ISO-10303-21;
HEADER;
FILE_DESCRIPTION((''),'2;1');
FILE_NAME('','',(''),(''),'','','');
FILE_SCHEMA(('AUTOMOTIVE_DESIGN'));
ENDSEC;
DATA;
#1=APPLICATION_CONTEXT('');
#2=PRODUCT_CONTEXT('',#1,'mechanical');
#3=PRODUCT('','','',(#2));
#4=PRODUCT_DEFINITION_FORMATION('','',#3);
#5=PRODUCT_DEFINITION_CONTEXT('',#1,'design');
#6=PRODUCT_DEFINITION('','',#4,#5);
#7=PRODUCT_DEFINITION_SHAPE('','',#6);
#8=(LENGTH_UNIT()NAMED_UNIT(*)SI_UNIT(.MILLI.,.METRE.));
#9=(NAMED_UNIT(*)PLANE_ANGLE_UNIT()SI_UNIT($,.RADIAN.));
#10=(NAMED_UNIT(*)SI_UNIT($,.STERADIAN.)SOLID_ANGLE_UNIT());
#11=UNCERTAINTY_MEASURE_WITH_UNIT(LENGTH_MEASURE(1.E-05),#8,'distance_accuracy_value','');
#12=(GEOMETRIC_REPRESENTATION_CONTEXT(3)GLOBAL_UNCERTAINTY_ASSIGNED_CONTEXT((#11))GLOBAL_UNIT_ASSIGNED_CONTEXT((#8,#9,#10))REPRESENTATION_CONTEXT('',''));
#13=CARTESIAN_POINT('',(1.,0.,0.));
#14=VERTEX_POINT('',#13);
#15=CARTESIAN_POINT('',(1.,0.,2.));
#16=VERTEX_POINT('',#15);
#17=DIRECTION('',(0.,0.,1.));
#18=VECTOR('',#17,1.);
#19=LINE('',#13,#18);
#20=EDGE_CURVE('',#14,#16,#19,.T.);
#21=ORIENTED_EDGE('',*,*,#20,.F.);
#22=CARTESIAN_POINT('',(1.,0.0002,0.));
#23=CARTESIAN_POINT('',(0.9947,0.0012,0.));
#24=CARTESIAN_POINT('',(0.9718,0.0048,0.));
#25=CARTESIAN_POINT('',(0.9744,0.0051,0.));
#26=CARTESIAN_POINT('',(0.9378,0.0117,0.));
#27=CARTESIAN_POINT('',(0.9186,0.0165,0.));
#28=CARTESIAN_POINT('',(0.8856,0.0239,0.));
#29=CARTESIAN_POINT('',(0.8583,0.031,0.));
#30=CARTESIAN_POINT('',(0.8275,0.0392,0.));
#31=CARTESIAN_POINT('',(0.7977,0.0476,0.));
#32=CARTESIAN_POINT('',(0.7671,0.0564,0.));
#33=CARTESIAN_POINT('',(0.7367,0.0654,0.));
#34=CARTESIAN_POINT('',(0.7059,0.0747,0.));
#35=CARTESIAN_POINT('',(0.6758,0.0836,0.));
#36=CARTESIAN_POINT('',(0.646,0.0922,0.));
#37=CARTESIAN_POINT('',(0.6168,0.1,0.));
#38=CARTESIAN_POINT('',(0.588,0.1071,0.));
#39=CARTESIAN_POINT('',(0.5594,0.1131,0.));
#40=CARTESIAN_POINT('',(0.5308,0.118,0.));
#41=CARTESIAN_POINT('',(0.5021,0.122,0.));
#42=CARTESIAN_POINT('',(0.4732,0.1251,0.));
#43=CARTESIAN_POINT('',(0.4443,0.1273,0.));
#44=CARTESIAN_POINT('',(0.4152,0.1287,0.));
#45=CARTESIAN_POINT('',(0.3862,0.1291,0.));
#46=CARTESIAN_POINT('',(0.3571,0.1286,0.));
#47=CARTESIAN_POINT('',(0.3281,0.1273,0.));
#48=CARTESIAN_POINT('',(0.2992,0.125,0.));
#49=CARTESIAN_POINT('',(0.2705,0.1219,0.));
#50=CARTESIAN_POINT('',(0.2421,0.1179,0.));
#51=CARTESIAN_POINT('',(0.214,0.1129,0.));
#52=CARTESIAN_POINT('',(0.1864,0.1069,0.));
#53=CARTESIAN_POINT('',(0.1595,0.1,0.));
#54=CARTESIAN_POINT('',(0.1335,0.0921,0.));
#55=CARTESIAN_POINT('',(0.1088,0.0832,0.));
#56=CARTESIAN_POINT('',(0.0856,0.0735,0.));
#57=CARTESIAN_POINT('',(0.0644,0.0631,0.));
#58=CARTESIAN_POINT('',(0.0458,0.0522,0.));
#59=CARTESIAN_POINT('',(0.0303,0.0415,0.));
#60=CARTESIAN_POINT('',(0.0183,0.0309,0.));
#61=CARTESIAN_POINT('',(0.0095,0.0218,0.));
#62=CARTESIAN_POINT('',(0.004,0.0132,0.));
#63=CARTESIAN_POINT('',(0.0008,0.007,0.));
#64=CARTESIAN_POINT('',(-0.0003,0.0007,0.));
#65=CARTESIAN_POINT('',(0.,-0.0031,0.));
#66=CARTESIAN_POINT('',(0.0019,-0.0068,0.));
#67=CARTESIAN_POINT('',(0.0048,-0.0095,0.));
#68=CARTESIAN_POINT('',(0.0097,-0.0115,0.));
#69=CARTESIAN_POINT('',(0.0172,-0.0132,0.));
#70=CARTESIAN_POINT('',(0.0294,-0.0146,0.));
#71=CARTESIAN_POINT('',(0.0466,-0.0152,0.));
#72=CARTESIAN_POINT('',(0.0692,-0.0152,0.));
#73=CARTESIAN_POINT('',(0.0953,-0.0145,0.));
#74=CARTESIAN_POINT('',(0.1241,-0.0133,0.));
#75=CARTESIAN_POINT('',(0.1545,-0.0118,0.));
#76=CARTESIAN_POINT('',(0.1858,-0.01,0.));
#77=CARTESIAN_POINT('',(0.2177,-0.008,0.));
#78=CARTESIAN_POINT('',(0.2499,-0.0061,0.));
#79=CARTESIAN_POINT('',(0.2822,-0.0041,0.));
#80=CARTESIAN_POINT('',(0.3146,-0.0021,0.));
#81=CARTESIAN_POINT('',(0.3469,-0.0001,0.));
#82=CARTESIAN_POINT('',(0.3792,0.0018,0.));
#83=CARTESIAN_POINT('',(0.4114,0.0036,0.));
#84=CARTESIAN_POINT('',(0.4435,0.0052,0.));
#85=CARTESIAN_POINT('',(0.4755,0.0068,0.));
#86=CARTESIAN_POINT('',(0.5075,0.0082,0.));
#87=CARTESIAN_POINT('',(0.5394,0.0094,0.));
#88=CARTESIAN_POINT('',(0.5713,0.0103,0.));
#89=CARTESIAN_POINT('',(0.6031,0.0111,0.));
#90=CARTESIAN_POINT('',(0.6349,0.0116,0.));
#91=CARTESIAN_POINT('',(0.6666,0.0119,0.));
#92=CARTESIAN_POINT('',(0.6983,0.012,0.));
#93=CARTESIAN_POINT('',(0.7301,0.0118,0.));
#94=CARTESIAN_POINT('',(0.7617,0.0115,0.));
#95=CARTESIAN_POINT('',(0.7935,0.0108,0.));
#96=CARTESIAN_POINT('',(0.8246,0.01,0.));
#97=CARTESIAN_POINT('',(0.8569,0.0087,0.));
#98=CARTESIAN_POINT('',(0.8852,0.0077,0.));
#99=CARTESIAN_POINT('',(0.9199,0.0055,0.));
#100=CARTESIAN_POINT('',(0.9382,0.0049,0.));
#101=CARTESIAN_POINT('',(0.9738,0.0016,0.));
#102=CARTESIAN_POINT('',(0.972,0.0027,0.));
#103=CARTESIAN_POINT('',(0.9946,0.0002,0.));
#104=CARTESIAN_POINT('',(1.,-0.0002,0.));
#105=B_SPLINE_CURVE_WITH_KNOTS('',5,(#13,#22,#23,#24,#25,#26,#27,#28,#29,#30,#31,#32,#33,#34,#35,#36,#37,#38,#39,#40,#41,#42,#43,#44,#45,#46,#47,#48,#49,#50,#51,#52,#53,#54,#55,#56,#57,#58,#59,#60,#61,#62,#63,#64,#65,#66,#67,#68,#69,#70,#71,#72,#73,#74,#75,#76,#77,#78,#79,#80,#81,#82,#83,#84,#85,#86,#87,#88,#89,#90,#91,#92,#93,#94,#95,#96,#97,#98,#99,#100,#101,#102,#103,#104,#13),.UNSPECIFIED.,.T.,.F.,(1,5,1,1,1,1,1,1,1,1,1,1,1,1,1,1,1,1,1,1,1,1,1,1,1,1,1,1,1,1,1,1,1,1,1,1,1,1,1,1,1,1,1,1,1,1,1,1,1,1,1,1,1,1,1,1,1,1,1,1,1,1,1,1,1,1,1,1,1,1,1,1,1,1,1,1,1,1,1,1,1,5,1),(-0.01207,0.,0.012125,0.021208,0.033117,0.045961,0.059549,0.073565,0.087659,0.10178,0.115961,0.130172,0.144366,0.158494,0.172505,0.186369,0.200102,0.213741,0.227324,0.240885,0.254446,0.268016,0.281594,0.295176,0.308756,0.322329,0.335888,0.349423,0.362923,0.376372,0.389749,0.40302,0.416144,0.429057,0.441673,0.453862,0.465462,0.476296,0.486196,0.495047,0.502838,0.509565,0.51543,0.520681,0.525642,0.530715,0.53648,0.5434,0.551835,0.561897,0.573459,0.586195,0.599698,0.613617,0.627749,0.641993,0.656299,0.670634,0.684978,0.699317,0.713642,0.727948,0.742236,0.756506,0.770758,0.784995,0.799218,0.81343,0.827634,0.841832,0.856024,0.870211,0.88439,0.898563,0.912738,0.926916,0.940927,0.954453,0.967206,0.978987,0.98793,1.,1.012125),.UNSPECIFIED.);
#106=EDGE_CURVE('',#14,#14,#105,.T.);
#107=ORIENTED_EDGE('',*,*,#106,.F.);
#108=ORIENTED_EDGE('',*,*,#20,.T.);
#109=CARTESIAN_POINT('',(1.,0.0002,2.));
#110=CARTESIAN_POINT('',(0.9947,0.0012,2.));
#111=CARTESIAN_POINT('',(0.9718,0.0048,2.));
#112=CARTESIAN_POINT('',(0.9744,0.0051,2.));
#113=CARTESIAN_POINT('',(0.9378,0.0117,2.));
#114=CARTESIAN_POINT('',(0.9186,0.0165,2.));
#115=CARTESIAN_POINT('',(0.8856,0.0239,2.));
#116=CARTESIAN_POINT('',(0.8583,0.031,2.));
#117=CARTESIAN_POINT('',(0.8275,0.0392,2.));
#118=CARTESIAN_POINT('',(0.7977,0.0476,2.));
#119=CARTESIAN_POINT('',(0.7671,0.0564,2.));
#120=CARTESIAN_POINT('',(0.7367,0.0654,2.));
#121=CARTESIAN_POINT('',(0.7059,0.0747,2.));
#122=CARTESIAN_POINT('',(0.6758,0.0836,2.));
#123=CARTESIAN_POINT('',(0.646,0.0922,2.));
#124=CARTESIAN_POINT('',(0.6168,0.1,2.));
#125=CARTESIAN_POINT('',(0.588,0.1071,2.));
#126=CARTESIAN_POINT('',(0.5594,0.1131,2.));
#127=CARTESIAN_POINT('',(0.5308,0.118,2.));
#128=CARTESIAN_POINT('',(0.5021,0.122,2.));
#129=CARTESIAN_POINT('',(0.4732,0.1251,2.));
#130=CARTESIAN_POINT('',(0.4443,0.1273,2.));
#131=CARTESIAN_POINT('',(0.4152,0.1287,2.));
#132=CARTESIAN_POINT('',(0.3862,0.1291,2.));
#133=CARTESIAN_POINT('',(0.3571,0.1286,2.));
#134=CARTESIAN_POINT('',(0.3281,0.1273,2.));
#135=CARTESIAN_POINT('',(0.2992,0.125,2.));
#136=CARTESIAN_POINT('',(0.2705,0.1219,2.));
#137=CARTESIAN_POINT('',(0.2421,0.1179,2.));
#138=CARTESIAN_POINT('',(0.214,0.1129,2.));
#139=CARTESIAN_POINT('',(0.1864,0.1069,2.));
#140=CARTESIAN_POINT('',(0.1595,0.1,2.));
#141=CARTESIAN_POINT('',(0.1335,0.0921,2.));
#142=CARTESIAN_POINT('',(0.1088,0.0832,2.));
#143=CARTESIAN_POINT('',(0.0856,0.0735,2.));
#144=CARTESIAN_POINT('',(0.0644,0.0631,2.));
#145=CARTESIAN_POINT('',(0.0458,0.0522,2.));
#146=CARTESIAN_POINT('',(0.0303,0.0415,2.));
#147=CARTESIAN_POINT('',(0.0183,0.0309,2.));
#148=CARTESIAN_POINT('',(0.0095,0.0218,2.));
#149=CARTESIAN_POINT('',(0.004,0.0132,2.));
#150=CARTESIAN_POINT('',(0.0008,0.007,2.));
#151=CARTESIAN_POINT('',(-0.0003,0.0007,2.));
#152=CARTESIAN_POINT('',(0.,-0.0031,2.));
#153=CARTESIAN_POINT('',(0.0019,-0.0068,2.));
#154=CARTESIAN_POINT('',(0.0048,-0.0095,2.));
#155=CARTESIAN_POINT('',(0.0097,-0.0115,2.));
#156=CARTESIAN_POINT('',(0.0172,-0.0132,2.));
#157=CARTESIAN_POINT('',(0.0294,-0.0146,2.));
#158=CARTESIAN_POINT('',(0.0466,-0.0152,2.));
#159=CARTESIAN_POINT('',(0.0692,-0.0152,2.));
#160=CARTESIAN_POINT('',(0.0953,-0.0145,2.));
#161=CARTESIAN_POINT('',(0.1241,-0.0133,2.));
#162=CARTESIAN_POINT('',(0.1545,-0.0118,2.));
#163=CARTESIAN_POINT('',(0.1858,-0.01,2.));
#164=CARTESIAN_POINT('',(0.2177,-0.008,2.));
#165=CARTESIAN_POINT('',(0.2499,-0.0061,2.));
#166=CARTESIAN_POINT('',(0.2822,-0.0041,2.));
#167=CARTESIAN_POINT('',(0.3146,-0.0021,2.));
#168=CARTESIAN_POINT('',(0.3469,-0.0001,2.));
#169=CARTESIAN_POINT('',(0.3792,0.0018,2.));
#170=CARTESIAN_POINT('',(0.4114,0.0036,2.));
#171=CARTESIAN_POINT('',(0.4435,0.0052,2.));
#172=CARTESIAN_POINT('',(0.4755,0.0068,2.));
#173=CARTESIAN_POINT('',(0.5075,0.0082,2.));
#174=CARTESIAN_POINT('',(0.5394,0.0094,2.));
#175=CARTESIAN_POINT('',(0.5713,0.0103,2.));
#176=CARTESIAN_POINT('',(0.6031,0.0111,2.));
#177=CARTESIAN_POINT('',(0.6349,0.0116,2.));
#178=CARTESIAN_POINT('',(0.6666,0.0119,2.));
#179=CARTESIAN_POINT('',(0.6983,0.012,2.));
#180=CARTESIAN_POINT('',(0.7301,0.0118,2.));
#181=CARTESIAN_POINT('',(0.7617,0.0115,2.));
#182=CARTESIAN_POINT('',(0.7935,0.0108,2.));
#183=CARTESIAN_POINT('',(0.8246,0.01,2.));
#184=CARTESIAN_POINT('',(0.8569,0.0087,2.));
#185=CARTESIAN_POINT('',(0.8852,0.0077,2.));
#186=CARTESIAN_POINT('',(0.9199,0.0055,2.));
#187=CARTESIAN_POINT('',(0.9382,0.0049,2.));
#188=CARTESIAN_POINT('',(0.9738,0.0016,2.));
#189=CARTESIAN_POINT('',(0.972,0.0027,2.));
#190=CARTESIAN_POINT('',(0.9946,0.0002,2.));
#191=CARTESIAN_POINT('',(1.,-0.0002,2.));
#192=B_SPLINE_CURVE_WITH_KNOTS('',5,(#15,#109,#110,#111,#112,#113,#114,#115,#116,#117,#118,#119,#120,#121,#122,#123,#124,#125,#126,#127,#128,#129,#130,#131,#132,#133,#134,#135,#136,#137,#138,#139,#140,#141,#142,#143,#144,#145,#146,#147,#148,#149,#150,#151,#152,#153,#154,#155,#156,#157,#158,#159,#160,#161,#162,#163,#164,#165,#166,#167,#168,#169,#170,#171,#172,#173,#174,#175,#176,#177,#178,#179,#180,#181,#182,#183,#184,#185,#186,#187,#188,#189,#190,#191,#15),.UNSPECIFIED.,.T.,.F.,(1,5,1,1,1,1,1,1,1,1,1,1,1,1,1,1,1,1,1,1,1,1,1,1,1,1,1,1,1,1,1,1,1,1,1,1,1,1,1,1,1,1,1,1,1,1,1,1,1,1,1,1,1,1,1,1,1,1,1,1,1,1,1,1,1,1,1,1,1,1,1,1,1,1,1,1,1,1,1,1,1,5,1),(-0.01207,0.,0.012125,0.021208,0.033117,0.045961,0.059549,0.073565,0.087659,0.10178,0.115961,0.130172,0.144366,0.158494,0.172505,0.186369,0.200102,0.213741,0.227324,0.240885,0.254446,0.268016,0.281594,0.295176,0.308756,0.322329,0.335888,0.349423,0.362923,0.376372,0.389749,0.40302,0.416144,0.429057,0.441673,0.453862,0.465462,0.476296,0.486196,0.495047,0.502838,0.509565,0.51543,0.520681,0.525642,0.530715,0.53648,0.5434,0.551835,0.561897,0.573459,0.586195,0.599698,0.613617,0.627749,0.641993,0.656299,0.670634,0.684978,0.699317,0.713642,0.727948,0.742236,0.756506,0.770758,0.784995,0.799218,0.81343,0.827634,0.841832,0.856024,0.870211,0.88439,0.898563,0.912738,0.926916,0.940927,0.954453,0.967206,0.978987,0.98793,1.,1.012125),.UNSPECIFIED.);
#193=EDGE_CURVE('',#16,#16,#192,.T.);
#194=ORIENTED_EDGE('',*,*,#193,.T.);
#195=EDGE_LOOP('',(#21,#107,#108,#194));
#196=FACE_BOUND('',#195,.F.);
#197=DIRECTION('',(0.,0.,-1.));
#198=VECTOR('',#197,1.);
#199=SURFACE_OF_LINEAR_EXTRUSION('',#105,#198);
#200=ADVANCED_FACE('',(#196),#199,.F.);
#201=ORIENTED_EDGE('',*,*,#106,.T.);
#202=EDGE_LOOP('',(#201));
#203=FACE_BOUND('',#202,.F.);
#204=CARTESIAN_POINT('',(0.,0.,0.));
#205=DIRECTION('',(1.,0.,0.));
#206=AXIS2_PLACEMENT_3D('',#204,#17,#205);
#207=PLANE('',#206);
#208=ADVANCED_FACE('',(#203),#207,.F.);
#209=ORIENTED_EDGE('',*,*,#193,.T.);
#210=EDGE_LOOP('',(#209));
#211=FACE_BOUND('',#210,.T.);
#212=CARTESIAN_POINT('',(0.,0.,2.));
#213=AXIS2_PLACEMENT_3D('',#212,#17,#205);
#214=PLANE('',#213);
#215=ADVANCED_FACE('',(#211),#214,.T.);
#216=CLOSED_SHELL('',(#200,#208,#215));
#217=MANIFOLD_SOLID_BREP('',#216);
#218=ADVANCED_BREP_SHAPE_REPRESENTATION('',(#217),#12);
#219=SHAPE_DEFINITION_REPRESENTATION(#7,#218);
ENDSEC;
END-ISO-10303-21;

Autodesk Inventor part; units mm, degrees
ref_plane "YZ Plane" through (0, 0, 0) normal (1, 0, 0) x (0, 1, 0)
ref_plane "XZ Plane" through (0, 0, 0) normal (0, 1, 0) x (-1, 0, 0)
ref_plane "XY Plane" through (0, 0, 0) normal (0, 0, 1) x (1, 0, 0)
sketch "スケッチ1" plane through (0, 0, 0) normal (0, 0, 1) x (1, 0, 0)
  spline S0 degree 5 poles (1, 0) (1, 0.0002) (0.9947, 0.0012) (0.9718, 0.0048) (0.9744, 0.0051) (0.9378, 0.0117) (0.9186, 0.0165) (0.8856, 0.0239) (0.8583, 0.031) (0.8275, 0.0392) (0.7977, 0.0476) (0.7671, 0.0564) (0.7367, 0.0654) (0.7059, 0.0747) (0.6758, 0.0836) (0.646, 0.0922) (0.6168, 0.1) (0.588, 0.1071) (0.5594, 0.1131) (0.5308, 0.118) (0.5021, 0.122) (0.4732, 0.1251) (0.4443, 0.1273) (0.4152, 0.1287) (0.3862, 0.1291) (0.3571, 0.1286) (0.3281, 0.1273) (0.2992, 0.125) (0.2705, 0.1219) (0.2421, 0.1179) (0.214, 0.1129) (0.1864, 0.1069) (0.1595, 0.1) (0.1335, 0.0921) (0.1088, 0.0832) (0.0856, 0.0735) (0.0644, 0.0631) (0.0458, 0.0522) (0.0303, 0.0415) (0.0183, 0.0309) (0.0095, 0.0218) (0.004, 0.0132) (0.0008, 0.007) (-0.0003, 0.0007) (0, -0.0031) (0.0019, -0.0068) (0.0048, -0.0095) (0.0097, -0.0115) (0.0172, -0.0132) (0.0294, -0.0146) (0.0466, -0.0152) (0.0692, -0.0152) (0.0953, -0.0145) (0.1241, -0.0133) (0.1545, -0.0118) (0.1858, -0.01) (0.2177, -0.008) (0.2499, -0.0061) (0.2822, -0.0041) (0.3146, -0.0021) (0.3469, -0.0001) (0.3792, 0.0018) (0.4114, 0.0036) (0.4435, 0.0052) (0.4755, 0.0068) (0.5075, 0.0082) (0.5394, 0.0094) (0.5713, 0.0103) (0.6031, 0.0111) (0.6349, 0.0116) (0.6666, 0.0119) (0.6983, 0.012) (0.7301, 0.0118) (0.7617, 0.0115) (0.7935, 0.0108) (0.8246, 0.01) (0.8569, 0.0087) (0.8852, 0.0077) (0.9199, 0.0055) (0.9382, 0.0049) (0.9738, 0.0016) (0.972, 0.0027) (0.9946, 0.0002) (1, -0.0002) (1, 0) knots 0 0 0 0 0 0 0.012125 0.021208 0.033117 0.045961 0.059549 0.073565 0.087659 0.10178 0.115961 0.130172 0.144366 0.158494 0.172505 0.186369 0.200102 0.213741 0.227324 0.240885 0.254446 0.268016 0.281594 0.295176 0.308756 0.322329 0.335888 0.349423 0.362923 0.376372 0.389749 0.40302 0.416144 0.429057 0.441673 0.453862 0.465462 0.476296 0.486196 0.495047 0.502838 0.509565 0.51543 0.520681 0.525642 0.530715 0.53648 0.5434 0.551835 0.561897 0.573459 0.586195 0.599698 0.613617 0.627749 0.641993 0.656299 0.670634 0.684978 0.699317 0.713642 0.727948 0.742236 0.756506 0.770758 0.784995 0.799218 0.81343 0.827634 0.841832 0.856024 0.870211 0.88439 0.898563 0.912738 0.926916 0.940927 0.954453 0.967206 0.978987 0.98793 1 1 1 1 1 1
  point P0 (0, 0)
  point P1 (0.97, 0.0056)
  point P2 (0.9479, 0.01)
  point P3 (0.9186, 0.0164)
  point P4 (0.888, 0.0236)
  point P5 (0.858, 0.0311)
  point P6 (0.828, 0.0392)
  point P7 (0.7978, 0.0476)
  point P8 (0.7674, 0.0564)
  point P9 (0.7366, 0.0655)
  point P10 (0.7057, 0.0747)
  point P11 (0.6752, 0.0837)
  point P12 (0.6454, 0.0922)
  point P13 (0.6163, 0.1)
  point P14 (0.5876, 0.1069)
  point P15 (0.5591, 0.1128)
  point P16 (0.5307, 0.1178)
  point P17 (0.502, 0.1218)
  point P18 (0.4732, 0.1249)
  point P19 (0.4443, 0.1271)
  point P20 (0.4153, 0.1284)
  point P21 (0.3862, 0.1289)
  point P22 (0.3571, 0.1284)
  point P23 (0.3281, 0.127)
  point P24 (0.2991, 0.1248)
  point P25 (0.2704, 0.1217)
  point P26 (0.2419, 0.1176)
  point P27 (0.2138, 0.1126)
  point P28 (0.1861, 0.1066)
  point P29 (0.1591, 0.0995)
  point P30 (0.1329, 0.0915)
  point P31 (0.1079, 0.0825)
  point P32 (0.0844, 0.0726)
  point P33 (0.0629, 0.0618)
  point P34 (0.044, 0.0505)
  point P35 (0.0284, 0.0393)
  point P36 (0.0165, 0.0287)
  point P37 (0.0083, 0.0193)
  point P38 (0.0033, 0.0115)
  point P39 (0.0008, 0.0051)
  point P40 (0, 0)
  point P41 (0.0005, -0.0035)
  point P42 (0.002, -0.0064)
  point P43 (0.0044, -0.0088)
  point P44 (0.0081, -0.0107)
  point P45 (0.0141, -0.0124)
  point P46 (0.0246, -0.0139)
  point P47 (0.0415, -0.0149)
  point P48 (0.0649, -0.0151)
  point P49 (0.0926, -0.0145)
  point P50 (0.1226, -0.0133)
  point P51 (0.1537, -0.0117)
  point P52 (0.1854, -0.01)
  point P53 (0.2174, -0.0081)
  point P54 (0.2497, -0.0061)
  point P55 (0.2822, -0.0041)
  point P56 (0.3146, -0.0021)
  point P57 (0.347, -0.0001)
  point P58 (0.3792, 0.0018)
  point P59 (0.4114, 0.0035)
  point P60 (0.4436, 0.0052)
  point P61 (0.4756, 0.0067)
  point P62 (0.5076, 0.0081)
  point P63 (0.5395, 0.0093)
  point P64 (0.5713, 0.0103)
  point P65 (0.6031, 0.011)
  point P66 (0.6349, 0.0116)
  point P67 (0.6666, 0.0119)
  point P68 (0.6984, 0.0119)
  point P69 (0.7301, 0.0118)
  point P70 (0.7618, 0.0114)
  point P71 (0.7934, 0.0108)
  point P72 (0.825, 0.0099)
  point P73 (0.8566, 0.0088)
  point P74 (0.8883, 0.0073)
  point P75 (0.92, 0.0056)
  point P76 (0.948, 0.0039)
  point P77 (0.9697, 0.0023)
  point P78 (0.9863, 0.0011)
extrude "押し出し1" add sketch "スケッチ1" along normal blind 2
sketch "スケッチ2" plane through (0, 0, 2) normal (0, 0, 1) x (1, 0, 0)
  line L0 (-10, 10) -> (10, 10)
  line L1 (10, 10) -> (10, -10)
  line L2 (10, -10) -> (-10, -10)
  line L3 (-10, -10) -> (-10, 10)
  line L4 (-10, 10) -> (10, -10) construction
  line L5 (10, 10) -> (-10, -10) construction
  point P0 (0, 0)
  dimension "d2" = 20
  dimension "d3" = 20
surface extrude "押し出しサーフェス1" sketch "スケッチ2" against normal blind 2 shown yes curves L0 L1 L2 L3
sketch "スケッチ3" plane through (-10, 10, 2) normal (0, 1, 0) x (1, 0, 0)
  line L0 (0, 2) -> (20, 2) projected
  line L1 (0, 0) -> (20, 0) projected
  point P0 (10, 2)
surface extrude "押し出しサーフェス2" sketch "スケッチ3" against normal up to surface (20 mm away) shown yes curves L1
sketch "スケッチ4" plane through (-10, 10, 2) normal (0, 1, 0) x (1, 0, 0)
  line L0 (0, 2) -> (20, 2) projected
  point P0 (10, 2)
surface extrude "押し出しサーフェス3" sketch "スケッチ4" against normal up to surface (20 mm away) shown yes curves L0
properties part number "DAE-11"
